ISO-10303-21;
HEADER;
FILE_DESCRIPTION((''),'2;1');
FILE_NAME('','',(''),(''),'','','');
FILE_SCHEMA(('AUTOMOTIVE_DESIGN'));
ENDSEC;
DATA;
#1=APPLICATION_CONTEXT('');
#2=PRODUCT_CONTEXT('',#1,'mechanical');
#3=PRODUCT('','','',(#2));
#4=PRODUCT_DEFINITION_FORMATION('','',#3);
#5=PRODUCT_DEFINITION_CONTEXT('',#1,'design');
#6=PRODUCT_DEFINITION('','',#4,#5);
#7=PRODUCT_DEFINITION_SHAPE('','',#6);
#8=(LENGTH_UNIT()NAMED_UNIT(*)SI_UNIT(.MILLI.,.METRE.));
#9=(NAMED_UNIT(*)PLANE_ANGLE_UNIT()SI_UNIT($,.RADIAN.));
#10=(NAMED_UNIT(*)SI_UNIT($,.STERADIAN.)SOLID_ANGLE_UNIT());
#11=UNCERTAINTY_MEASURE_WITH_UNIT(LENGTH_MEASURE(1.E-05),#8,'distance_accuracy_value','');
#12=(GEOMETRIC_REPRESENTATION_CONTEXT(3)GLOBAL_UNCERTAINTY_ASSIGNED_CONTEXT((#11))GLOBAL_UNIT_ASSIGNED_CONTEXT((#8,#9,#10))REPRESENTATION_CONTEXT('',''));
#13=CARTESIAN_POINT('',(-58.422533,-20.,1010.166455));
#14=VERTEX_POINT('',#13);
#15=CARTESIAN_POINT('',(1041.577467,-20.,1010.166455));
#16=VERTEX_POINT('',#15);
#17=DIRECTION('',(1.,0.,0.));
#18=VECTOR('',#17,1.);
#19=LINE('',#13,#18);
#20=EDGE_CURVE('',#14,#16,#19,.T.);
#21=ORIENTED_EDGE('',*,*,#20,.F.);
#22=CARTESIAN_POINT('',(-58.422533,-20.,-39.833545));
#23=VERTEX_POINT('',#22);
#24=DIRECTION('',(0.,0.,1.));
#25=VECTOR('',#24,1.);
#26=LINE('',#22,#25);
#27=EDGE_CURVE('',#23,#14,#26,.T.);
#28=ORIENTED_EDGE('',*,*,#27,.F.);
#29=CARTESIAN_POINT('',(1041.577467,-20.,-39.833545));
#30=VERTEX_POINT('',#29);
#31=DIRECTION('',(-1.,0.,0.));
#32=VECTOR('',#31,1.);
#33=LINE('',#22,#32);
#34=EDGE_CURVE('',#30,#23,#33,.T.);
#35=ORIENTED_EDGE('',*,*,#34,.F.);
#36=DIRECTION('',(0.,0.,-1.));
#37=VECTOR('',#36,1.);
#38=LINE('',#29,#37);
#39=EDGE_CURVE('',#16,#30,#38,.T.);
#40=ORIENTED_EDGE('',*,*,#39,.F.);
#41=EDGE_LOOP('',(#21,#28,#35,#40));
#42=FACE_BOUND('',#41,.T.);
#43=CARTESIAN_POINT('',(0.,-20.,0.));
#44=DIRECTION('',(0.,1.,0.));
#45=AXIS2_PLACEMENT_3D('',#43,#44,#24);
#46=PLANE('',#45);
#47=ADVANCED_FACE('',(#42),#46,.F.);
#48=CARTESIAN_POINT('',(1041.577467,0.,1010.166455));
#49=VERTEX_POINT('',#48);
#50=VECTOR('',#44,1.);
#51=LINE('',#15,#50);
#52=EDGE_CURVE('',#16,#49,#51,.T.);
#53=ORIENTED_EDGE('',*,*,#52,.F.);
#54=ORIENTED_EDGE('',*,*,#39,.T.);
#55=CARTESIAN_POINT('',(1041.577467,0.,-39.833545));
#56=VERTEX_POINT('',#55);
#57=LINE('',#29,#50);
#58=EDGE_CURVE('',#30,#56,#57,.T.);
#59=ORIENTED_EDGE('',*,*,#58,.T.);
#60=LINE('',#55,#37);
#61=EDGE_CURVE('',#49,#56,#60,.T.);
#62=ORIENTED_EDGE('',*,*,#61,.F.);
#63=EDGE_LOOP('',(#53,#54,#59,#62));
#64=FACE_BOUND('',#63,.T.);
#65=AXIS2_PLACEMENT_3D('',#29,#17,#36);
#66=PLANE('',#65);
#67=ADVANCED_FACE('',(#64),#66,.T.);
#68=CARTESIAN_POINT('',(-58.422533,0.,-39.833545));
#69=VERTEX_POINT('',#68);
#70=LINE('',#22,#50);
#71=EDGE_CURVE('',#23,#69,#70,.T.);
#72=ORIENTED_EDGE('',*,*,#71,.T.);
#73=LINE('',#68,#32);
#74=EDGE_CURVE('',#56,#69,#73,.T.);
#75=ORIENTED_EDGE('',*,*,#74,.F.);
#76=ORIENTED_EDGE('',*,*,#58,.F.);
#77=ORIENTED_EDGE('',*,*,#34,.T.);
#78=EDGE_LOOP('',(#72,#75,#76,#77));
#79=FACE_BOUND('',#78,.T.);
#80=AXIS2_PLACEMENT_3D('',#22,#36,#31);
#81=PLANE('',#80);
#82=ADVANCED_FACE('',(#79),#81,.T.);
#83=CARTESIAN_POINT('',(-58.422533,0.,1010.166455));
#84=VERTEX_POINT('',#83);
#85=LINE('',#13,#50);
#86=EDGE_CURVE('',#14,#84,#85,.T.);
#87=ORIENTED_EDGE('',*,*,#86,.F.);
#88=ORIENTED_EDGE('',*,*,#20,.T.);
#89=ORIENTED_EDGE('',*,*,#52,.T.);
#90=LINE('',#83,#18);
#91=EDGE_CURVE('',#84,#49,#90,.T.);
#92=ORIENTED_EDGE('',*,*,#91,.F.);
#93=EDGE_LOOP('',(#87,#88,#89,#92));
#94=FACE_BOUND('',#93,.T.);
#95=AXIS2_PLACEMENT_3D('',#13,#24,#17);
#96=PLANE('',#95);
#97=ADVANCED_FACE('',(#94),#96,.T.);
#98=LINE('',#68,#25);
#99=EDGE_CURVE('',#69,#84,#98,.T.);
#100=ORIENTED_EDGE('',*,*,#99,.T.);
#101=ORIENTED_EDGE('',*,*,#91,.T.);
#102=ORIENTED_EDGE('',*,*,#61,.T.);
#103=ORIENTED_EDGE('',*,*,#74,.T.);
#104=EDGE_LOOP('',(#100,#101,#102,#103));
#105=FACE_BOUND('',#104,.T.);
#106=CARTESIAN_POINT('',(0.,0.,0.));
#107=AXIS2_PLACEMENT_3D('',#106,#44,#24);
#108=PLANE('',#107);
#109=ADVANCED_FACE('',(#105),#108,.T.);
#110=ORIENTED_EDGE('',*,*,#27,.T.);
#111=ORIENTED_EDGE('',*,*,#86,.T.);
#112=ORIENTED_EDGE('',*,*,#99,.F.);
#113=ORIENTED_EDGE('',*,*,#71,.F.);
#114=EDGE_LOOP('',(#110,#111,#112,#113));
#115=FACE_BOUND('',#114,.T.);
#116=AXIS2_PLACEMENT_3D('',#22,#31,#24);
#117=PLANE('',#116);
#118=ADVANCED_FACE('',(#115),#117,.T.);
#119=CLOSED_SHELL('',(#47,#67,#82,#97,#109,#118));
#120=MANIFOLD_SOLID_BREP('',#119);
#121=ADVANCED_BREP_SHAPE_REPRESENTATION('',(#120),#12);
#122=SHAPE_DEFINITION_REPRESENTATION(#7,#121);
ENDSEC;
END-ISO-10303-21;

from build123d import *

# Parameters (mm, degrees)
SKETCH_1_W             = 1100
SKETCH_1_H             = 1050
SM_BASE_FLANGE_1_DEPTH = 20


# Sheet-metal steps are written as plain solids
with BuildPart() as part:
    # Sketch 1 → Базовая кромка1 (new body)
    with BuildSketch(Plane(origin=(0, 0, 0), x_dir=(1, 0, 0), z_dir=(0, 1, 0))):
        with Locations((491.577466865, -485.166454681)):
            Rectangle(SKETCH_1_W, SKETCH_1_H)
    extrude(amount=-SM_BASE_FLANGE_1_DEPTH)


solid = part.part
